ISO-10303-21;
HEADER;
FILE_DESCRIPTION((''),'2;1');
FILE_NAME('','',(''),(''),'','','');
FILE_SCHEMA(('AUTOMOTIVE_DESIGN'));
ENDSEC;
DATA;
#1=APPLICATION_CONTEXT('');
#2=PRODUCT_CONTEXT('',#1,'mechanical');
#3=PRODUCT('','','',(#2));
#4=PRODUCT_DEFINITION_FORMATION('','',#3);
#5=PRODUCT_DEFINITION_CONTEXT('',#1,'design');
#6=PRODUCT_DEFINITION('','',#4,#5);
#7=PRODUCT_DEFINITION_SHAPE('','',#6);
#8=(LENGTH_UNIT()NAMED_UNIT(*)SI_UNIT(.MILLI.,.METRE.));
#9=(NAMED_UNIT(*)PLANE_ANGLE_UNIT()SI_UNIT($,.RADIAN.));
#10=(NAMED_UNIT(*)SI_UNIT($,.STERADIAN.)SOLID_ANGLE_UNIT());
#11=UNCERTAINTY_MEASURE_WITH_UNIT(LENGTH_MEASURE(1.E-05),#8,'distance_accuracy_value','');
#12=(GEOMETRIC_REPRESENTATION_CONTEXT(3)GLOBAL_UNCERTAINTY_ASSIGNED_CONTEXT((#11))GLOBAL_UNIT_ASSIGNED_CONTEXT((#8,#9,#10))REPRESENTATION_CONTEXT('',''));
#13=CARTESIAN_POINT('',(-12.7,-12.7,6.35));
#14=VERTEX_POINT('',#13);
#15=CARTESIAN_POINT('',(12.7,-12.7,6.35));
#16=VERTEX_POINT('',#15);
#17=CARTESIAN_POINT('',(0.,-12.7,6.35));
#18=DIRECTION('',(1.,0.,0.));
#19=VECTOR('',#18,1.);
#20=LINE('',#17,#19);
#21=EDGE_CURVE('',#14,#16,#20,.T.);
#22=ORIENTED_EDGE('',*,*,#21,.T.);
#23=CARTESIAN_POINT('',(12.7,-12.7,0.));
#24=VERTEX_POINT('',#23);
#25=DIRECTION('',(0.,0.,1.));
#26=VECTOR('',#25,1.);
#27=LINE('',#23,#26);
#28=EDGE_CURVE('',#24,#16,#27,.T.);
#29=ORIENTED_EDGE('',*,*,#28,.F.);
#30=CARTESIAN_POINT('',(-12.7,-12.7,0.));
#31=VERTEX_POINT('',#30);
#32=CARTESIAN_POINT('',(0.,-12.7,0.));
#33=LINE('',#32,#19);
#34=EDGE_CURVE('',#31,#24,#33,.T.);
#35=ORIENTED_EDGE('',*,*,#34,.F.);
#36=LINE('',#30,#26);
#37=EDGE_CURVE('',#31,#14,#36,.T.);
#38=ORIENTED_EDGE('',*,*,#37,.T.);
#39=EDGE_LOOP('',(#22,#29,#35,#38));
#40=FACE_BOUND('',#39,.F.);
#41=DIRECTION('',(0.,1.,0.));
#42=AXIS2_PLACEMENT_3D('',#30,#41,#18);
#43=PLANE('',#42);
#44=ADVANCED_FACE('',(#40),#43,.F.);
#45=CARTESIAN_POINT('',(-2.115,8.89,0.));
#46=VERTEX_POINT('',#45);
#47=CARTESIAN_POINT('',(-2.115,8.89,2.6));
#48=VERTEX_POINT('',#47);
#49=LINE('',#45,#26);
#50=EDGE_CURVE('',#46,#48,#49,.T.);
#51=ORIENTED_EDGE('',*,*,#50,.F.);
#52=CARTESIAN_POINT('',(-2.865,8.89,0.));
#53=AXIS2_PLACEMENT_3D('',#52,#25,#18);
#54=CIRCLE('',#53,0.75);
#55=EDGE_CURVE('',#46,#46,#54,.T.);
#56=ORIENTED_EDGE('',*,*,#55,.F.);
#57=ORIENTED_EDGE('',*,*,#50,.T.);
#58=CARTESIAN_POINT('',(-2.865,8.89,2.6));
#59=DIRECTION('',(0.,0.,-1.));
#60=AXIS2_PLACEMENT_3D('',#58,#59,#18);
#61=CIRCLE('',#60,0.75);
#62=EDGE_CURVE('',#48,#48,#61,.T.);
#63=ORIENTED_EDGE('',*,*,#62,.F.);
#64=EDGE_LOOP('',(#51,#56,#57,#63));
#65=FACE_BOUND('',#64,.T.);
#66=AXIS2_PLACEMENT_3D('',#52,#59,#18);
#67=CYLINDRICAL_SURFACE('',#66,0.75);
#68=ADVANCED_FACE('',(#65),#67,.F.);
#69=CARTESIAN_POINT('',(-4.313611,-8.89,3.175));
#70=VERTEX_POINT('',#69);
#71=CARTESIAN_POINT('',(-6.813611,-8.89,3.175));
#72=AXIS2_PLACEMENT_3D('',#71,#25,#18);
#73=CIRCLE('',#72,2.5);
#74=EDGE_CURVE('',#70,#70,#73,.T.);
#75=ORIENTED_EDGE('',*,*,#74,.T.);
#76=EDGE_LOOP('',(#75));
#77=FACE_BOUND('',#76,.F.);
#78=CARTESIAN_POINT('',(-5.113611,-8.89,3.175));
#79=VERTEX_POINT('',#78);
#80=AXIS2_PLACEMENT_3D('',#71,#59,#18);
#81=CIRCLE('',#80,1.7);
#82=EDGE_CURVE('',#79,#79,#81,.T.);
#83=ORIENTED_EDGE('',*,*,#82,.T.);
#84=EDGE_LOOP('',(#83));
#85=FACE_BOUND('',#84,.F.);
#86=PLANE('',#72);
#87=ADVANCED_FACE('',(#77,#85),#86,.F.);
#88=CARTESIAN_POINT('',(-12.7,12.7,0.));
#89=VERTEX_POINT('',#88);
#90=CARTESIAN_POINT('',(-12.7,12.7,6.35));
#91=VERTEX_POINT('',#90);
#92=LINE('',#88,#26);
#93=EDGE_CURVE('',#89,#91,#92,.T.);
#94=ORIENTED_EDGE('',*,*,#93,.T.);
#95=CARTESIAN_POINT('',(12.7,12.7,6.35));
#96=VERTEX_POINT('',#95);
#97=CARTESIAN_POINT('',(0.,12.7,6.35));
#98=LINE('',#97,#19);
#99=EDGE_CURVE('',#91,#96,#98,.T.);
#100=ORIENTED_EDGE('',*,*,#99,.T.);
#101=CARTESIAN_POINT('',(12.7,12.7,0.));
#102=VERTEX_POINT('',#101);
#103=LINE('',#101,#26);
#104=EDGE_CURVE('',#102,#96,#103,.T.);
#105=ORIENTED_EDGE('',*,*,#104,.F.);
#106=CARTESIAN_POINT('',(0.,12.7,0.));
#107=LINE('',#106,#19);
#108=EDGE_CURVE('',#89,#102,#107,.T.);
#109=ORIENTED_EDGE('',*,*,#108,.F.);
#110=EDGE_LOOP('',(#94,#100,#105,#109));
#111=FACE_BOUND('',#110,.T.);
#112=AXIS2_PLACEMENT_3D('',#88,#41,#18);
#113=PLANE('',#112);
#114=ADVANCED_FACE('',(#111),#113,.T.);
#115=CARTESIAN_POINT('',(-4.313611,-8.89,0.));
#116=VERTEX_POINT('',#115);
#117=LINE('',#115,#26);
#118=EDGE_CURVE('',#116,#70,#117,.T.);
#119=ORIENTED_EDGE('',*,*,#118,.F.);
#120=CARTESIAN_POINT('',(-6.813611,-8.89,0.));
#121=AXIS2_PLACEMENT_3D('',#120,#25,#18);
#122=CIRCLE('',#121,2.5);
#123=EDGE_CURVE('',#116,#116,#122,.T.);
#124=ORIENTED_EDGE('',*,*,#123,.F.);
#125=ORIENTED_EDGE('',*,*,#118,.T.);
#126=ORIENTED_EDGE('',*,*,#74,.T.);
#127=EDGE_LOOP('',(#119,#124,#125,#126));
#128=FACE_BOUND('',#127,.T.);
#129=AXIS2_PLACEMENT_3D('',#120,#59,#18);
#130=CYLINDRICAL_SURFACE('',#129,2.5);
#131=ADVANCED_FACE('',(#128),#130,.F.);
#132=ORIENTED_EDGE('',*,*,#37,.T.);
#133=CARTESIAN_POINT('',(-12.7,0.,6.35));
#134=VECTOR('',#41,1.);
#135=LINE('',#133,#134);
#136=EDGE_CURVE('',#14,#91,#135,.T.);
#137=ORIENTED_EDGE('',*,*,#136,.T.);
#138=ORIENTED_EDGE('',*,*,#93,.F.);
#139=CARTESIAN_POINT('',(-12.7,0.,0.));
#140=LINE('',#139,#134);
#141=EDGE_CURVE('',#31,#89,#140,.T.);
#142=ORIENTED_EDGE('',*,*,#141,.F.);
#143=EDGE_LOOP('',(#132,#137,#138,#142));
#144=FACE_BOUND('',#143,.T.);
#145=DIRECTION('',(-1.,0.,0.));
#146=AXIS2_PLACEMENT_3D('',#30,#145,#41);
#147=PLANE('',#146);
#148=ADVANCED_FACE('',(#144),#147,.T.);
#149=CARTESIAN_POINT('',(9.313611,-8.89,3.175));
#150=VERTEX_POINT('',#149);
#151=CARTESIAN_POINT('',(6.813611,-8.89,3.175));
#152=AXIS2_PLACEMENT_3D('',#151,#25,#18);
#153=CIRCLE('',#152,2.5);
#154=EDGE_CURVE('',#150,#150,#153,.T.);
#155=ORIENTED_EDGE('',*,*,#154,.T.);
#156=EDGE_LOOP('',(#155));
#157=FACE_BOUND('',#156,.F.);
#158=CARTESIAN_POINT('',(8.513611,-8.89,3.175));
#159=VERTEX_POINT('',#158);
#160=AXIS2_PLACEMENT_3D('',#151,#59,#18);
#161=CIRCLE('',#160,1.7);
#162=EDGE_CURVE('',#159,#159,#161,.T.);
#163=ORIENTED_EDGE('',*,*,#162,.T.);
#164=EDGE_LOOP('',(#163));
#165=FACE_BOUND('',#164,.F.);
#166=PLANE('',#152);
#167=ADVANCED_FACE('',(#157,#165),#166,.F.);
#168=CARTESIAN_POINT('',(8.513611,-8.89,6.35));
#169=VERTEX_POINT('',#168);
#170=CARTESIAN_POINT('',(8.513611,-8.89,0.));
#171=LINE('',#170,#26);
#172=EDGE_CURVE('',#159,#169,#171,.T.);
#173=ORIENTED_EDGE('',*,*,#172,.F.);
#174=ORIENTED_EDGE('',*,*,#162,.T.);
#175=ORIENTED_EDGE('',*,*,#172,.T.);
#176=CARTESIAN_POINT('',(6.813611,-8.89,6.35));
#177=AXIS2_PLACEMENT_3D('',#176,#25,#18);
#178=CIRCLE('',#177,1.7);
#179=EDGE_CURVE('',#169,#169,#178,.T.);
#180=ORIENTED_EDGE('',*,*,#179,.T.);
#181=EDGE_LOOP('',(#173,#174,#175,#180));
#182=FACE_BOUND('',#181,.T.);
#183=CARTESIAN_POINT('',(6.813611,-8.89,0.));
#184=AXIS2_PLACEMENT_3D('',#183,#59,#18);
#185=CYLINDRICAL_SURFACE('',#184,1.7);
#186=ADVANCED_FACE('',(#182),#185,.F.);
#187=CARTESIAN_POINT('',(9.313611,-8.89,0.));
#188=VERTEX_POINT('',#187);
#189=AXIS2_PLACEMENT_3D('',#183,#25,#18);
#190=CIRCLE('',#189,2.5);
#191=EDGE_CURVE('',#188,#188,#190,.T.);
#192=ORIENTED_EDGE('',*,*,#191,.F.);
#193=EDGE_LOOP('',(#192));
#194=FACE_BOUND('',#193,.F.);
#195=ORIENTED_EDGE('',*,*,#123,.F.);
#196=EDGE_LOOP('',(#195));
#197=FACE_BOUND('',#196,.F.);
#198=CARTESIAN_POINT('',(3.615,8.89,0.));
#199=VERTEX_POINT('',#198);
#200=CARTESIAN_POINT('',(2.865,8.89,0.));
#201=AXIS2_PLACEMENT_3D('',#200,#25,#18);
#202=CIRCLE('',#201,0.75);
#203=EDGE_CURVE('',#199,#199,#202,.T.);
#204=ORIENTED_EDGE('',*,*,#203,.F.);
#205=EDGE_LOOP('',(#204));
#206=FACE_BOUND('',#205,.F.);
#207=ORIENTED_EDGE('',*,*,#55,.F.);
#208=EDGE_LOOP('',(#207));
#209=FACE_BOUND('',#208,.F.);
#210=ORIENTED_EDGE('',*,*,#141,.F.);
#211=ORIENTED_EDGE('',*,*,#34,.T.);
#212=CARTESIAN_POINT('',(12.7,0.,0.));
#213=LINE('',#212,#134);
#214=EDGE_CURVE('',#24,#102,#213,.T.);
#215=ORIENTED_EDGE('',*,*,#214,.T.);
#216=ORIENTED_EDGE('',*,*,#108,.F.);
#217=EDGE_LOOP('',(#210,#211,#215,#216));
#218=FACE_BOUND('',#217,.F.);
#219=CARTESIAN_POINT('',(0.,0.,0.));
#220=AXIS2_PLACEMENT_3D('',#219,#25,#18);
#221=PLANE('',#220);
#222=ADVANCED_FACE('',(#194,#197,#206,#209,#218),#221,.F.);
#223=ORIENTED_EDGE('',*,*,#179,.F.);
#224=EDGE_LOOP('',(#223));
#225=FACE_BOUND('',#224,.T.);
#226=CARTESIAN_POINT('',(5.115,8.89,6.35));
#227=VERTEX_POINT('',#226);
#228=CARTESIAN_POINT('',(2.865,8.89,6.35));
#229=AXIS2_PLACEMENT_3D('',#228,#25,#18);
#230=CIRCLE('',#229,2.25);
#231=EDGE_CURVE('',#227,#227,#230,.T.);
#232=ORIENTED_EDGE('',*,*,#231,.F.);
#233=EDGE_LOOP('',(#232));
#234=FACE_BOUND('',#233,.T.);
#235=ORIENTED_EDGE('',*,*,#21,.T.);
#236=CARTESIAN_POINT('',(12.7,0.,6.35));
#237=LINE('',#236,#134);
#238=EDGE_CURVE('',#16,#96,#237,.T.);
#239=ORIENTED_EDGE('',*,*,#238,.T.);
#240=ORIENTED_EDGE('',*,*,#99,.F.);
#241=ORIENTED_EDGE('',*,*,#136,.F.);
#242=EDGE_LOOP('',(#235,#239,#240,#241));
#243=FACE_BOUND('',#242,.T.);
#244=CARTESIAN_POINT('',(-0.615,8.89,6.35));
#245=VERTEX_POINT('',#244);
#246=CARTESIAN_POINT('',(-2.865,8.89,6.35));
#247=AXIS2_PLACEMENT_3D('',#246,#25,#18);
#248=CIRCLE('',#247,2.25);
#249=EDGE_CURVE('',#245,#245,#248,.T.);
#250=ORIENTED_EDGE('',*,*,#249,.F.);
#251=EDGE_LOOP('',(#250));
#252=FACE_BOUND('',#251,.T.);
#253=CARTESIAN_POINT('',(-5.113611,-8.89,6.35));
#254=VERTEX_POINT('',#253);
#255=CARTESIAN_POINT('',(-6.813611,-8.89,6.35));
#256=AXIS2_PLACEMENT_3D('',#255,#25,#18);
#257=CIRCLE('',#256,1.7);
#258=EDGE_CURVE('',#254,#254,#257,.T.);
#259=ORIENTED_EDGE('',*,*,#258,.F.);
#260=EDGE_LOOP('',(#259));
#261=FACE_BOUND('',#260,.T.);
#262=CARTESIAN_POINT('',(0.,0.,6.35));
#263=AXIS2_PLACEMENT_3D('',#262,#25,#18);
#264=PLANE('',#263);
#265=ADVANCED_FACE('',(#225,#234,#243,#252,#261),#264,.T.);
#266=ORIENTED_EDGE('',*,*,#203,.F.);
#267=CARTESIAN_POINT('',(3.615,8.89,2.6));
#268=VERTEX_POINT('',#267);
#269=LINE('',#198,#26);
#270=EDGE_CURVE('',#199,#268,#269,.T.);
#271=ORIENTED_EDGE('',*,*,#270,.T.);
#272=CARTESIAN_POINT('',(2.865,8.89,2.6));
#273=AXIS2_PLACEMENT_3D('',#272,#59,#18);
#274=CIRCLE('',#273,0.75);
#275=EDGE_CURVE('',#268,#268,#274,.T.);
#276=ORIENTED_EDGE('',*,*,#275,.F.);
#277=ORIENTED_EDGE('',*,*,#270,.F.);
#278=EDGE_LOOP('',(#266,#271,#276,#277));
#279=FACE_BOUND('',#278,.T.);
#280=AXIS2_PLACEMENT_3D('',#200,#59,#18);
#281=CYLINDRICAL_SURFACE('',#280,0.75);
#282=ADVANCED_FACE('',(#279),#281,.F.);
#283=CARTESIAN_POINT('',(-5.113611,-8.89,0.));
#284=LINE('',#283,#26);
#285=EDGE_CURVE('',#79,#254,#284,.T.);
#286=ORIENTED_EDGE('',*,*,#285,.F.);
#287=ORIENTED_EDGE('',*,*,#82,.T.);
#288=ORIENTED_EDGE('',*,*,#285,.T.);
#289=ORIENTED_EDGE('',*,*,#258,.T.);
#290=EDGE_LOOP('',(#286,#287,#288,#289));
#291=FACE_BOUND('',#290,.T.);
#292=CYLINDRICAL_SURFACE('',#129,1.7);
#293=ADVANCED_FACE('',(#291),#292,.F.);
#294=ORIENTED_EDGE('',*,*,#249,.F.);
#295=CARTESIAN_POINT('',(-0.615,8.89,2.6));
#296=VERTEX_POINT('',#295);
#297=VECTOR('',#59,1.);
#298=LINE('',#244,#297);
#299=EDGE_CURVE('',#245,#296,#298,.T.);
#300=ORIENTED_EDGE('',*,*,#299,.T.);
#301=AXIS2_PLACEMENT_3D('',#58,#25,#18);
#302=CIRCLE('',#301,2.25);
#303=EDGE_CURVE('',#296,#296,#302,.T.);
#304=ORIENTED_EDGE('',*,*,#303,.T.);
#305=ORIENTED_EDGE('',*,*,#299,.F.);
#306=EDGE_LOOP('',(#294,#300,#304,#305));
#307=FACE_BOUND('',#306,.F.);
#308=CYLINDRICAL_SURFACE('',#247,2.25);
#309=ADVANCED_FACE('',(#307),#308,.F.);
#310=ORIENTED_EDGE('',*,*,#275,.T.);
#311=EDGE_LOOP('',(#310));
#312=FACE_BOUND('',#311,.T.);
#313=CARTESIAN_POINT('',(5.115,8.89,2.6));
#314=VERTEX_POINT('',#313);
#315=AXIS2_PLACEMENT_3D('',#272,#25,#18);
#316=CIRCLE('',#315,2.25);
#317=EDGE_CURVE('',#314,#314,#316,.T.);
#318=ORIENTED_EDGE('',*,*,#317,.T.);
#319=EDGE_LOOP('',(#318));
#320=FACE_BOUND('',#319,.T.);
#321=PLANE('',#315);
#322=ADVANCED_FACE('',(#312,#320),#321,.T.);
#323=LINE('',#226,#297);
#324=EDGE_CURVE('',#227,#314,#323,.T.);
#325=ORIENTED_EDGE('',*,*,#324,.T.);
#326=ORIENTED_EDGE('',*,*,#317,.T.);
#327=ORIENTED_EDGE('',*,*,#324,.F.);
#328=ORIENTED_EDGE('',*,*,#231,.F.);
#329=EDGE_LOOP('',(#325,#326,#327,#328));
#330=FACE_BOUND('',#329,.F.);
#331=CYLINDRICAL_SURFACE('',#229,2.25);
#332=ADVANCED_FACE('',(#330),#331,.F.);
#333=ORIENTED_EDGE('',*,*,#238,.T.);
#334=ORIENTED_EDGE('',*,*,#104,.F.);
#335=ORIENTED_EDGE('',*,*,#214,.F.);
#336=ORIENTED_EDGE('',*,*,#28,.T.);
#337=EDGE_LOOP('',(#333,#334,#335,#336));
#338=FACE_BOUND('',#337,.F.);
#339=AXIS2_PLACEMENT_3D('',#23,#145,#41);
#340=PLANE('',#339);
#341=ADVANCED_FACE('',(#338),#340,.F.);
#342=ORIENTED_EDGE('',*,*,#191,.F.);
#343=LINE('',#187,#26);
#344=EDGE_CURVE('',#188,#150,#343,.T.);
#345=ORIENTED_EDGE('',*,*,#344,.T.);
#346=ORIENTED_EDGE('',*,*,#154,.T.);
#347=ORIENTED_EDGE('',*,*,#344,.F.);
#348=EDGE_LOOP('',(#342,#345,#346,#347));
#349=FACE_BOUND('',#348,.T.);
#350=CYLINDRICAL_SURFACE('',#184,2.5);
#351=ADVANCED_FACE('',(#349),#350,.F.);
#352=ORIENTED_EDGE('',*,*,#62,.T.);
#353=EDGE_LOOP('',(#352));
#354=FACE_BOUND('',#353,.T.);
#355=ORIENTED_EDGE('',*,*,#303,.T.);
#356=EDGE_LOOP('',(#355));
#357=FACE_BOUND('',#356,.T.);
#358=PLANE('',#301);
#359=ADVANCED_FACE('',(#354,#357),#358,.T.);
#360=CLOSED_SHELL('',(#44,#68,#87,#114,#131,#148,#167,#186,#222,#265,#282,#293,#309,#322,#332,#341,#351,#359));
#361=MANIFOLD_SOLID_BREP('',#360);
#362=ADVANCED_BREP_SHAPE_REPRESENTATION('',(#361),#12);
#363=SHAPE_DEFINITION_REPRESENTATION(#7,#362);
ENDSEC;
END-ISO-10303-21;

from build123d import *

# Parameters (mm, degrees)
F0_W     = 25.4
F0_H     = 25.4
F0_R     = 1.7
F0_R_2   = 0.75
F1_DEPTH = 6.35
F2_R     = 2.5
F3_DEPTH = 3.175
F4_R     = 2.25
F5_DEPTH = 3.75


# Not quite as in the source:
# - a feature names something its author has since deleted; it is built from what else it names


with BuildPart() as f1:
    # F0 (on Top) → F1 (new body)
    with BuildSketch(Plane.XY):
        Rectangle(F0_W, F0_H)
        with Locations((-6.8136113696, -8.89)):
            Circle(F0_R, mode=Mode.SUBTRACT)
        with Locations((6.8136113696, -8.89)):
            Circle(F0_R, mode=Mode.SUBTRACT)
        with Locations((-2.865, 8.89)):
            Circle(F0_R_2, mode=Mode.SUBTRACT)
        with Locations((2.865, 8.89)):
            Circle(F0_R_2, mode=Mode.SUBTRACT)
    extrude(amount=F1_DEPTH)

    # F2 (on Top) → F3 (cut)
    with BuildSketch(Plane.XY):
        with Locations((-6.8136113696, -8.89)):
            Circle(F2_R)
        with Locations((6.8136113696, -8.89)):
            Circle(F2_R)
    extrude(amount=F3_DEPTH, mode=Mode.SUBTRACT)

    # F4 (on face) → F5 (cut)
    with BuildSketch(Plane.XY.offset(6.35)):
        with Locations((-2.865, 8.89)):
            Circle(F4_R)
        with Locations((2.865, 8.89)):
            Circle(F4_R)
    extrude(amount=-F5_DEPTH, mode=Mode.SUBTRACT)


solid = f1.part
